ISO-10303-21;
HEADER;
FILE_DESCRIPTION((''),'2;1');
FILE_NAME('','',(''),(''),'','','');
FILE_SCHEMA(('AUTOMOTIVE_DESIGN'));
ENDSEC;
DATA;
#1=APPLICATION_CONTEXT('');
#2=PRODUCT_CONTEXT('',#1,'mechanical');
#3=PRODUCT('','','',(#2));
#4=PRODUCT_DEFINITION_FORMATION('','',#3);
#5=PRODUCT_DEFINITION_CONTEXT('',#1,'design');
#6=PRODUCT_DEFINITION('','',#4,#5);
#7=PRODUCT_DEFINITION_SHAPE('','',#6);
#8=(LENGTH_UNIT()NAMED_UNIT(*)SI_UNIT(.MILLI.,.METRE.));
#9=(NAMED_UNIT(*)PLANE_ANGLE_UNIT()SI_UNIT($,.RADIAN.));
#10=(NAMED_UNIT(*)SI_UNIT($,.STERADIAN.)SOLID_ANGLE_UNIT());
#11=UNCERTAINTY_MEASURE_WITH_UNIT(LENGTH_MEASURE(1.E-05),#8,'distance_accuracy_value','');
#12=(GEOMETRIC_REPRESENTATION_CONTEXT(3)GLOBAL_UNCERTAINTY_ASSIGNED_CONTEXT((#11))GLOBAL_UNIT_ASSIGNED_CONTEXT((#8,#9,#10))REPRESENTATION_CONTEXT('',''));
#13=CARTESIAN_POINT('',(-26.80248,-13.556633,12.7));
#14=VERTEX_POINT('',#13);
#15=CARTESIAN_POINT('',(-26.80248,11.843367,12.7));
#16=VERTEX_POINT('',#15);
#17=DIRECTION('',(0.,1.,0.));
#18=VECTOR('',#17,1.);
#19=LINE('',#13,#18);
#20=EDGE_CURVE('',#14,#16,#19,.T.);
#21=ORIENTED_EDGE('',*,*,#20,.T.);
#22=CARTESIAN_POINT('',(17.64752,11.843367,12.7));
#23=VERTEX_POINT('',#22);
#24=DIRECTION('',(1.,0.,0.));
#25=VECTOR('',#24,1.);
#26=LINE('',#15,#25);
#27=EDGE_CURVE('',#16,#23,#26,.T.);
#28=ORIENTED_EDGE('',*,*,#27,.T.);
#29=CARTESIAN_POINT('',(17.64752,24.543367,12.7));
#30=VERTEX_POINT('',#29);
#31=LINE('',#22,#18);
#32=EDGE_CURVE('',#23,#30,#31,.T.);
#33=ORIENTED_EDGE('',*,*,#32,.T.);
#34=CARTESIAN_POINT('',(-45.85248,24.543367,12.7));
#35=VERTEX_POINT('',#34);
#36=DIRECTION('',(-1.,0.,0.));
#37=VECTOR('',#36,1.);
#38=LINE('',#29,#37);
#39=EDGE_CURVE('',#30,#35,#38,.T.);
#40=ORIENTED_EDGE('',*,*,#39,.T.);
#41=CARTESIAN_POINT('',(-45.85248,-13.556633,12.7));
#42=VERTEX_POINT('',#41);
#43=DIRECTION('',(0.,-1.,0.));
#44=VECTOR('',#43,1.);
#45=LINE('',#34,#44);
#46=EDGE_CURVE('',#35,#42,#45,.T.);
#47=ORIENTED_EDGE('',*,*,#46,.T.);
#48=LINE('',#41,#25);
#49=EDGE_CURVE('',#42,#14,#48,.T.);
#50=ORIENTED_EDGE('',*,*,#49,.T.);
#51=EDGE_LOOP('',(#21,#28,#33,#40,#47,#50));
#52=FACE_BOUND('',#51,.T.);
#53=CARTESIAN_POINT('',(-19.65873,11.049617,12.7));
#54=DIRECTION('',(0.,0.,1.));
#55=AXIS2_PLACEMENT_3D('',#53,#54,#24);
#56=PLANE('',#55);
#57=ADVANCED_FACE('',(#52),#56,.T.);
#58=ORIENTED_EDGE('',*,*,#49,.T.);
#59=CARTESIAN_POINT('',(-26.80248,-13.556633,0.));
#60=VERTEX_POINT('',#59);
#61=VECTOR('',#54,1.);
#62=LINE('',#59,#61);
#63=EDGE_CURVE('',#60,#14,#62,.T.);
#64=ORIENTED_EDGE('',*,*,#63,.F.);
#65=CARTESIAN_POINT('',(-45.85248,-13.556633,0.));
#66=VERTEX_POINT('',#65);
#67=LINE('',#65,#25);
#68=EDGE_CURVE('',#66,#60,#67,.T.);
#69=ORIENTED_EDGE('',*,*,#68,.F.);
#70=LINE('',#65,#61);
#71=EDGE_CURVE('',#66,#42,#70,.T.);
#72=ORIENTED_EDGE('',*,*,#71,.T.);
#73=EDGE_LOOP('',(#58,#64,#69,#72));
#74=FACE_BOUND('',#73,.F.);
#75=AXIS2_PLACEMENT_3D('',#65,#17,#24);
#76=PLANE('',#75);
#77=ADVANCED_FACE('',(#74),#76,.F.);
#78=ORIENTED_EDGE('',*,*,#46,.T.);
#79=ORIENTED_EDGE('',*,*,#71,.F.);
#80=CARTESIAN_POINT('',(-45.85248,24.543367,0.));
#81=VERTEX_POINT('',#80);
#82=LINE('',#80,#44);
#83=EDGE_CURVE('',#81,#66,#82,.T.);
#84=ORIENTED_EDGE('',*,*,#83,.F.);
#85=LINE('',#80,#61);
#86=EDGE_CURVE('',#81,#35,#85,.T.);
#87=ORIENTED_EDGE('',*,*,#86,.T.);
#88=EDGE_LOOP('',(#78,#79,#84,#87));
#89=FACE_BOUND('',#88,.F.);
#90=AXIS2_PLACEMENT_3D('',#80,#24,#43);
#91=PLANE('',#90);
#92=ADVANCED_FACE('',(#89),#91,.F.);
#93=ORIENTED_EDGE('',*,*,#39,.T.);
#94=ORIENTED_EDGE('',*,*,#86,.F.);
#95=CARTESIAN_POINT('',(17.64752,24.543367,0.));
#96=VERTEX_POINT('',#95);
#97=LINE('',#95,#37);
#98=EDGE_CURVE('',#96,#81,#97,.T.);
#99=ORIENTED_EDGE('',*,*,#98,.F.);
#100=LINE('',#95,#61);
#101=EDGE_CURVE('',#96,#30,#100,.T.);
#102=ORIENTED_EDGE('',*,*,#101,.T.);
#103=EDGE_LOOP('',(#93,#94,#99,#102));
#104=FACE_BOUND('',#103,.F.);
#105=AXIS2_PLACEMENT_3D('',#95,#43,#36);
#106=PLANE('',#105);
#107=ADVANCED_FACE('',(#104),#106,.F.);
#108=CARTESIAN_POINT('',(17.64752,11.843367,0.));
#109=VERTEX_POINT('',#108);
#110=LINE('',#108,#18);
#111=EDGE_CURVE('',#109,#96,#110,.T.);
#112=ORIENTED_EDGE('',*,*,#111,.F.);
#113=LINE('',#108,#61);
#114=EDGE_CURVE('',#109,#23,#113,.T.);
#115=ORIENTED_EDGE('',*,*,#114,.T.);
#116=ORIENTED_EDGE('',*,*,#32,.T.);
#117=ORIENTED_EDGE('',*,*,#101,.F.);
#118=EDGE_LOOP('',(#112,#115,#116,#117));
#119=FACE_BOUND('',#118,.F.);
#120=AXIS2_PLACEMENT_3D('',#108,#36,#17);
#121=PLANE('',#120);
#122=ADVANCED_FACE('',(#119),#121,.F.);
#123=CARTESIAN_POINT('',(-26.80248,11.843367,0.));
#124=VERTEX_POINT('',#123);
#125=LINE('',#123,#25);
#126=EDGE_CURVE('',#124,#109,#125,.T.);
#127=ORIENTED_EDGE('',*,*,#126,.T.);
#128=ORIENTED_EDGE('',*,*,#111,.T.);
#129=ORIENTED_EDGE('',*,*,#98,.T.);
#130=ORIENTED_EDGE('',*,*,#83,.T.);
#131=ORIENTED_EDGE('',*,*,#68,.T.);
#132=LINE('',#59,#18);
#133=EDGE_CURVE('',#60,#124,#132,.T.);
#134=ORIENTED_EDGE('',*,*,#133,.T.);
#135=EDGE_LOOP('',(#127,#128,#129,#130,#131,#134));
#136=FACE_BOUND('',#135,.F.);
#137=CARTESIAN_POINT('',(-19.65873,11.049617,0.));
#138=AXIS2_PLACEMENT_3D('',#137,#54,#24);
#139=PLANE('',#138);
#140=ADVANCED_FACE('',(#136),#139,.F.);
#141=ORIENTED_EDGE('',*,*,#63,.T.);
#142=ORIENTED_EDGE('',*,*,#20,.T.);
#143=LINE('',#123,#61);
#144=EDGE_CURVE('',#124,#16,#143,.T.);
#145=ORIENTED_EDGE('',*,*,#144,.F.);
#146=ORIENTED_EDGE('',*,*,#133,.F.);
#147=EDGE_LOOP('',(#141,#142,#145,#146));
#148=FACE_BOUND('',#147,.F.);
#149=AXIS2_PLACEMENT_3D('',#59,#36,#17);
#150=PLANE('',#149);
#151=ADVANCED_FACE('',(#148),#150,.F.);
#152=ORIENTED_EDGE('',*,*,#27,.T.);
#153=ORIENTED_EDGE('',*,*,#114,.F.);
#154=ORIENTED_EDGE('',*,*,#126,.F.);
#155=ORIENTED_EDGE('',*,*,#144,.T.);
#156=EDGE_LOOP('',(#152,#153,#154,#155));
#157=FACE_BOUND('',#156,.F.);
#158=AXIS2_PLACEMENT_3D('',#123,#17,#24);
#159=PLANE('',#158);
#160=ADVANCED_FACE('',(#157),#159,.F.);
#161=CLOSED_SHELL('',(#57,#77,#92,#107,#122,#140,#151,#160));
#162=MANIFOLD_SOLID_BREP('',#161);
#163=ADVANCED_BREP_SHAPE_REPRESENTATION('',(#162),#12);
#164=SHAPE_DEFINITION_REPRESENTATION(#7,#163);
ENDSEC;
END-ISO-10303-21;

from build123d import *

# Parameters (mm, degrees)
F1_DEPTH = 12.7


# Not quite as in the source:
# - a length typed as a fraction of an inch, garbled in the dataset ("3 / 203.2 mm" for 3/8 in), is restored


with BuildPart() as f1:
    # F0 (on Top) → F1 (new body)
    with BuildSketch(Plane.XY):
        Polygon((-45.8524803743, 24.5433666376), (-45.8524803743, -13.5566333624), (-26.8024803743, -13.5566333624), (-26.8024803743, 11.8433666376), (17.6475196257, 11.8433666376), (17.6475196257, 24.5433666376), align=None)
    extrude(amount=F1_DEPTH)


solid = f1.part
